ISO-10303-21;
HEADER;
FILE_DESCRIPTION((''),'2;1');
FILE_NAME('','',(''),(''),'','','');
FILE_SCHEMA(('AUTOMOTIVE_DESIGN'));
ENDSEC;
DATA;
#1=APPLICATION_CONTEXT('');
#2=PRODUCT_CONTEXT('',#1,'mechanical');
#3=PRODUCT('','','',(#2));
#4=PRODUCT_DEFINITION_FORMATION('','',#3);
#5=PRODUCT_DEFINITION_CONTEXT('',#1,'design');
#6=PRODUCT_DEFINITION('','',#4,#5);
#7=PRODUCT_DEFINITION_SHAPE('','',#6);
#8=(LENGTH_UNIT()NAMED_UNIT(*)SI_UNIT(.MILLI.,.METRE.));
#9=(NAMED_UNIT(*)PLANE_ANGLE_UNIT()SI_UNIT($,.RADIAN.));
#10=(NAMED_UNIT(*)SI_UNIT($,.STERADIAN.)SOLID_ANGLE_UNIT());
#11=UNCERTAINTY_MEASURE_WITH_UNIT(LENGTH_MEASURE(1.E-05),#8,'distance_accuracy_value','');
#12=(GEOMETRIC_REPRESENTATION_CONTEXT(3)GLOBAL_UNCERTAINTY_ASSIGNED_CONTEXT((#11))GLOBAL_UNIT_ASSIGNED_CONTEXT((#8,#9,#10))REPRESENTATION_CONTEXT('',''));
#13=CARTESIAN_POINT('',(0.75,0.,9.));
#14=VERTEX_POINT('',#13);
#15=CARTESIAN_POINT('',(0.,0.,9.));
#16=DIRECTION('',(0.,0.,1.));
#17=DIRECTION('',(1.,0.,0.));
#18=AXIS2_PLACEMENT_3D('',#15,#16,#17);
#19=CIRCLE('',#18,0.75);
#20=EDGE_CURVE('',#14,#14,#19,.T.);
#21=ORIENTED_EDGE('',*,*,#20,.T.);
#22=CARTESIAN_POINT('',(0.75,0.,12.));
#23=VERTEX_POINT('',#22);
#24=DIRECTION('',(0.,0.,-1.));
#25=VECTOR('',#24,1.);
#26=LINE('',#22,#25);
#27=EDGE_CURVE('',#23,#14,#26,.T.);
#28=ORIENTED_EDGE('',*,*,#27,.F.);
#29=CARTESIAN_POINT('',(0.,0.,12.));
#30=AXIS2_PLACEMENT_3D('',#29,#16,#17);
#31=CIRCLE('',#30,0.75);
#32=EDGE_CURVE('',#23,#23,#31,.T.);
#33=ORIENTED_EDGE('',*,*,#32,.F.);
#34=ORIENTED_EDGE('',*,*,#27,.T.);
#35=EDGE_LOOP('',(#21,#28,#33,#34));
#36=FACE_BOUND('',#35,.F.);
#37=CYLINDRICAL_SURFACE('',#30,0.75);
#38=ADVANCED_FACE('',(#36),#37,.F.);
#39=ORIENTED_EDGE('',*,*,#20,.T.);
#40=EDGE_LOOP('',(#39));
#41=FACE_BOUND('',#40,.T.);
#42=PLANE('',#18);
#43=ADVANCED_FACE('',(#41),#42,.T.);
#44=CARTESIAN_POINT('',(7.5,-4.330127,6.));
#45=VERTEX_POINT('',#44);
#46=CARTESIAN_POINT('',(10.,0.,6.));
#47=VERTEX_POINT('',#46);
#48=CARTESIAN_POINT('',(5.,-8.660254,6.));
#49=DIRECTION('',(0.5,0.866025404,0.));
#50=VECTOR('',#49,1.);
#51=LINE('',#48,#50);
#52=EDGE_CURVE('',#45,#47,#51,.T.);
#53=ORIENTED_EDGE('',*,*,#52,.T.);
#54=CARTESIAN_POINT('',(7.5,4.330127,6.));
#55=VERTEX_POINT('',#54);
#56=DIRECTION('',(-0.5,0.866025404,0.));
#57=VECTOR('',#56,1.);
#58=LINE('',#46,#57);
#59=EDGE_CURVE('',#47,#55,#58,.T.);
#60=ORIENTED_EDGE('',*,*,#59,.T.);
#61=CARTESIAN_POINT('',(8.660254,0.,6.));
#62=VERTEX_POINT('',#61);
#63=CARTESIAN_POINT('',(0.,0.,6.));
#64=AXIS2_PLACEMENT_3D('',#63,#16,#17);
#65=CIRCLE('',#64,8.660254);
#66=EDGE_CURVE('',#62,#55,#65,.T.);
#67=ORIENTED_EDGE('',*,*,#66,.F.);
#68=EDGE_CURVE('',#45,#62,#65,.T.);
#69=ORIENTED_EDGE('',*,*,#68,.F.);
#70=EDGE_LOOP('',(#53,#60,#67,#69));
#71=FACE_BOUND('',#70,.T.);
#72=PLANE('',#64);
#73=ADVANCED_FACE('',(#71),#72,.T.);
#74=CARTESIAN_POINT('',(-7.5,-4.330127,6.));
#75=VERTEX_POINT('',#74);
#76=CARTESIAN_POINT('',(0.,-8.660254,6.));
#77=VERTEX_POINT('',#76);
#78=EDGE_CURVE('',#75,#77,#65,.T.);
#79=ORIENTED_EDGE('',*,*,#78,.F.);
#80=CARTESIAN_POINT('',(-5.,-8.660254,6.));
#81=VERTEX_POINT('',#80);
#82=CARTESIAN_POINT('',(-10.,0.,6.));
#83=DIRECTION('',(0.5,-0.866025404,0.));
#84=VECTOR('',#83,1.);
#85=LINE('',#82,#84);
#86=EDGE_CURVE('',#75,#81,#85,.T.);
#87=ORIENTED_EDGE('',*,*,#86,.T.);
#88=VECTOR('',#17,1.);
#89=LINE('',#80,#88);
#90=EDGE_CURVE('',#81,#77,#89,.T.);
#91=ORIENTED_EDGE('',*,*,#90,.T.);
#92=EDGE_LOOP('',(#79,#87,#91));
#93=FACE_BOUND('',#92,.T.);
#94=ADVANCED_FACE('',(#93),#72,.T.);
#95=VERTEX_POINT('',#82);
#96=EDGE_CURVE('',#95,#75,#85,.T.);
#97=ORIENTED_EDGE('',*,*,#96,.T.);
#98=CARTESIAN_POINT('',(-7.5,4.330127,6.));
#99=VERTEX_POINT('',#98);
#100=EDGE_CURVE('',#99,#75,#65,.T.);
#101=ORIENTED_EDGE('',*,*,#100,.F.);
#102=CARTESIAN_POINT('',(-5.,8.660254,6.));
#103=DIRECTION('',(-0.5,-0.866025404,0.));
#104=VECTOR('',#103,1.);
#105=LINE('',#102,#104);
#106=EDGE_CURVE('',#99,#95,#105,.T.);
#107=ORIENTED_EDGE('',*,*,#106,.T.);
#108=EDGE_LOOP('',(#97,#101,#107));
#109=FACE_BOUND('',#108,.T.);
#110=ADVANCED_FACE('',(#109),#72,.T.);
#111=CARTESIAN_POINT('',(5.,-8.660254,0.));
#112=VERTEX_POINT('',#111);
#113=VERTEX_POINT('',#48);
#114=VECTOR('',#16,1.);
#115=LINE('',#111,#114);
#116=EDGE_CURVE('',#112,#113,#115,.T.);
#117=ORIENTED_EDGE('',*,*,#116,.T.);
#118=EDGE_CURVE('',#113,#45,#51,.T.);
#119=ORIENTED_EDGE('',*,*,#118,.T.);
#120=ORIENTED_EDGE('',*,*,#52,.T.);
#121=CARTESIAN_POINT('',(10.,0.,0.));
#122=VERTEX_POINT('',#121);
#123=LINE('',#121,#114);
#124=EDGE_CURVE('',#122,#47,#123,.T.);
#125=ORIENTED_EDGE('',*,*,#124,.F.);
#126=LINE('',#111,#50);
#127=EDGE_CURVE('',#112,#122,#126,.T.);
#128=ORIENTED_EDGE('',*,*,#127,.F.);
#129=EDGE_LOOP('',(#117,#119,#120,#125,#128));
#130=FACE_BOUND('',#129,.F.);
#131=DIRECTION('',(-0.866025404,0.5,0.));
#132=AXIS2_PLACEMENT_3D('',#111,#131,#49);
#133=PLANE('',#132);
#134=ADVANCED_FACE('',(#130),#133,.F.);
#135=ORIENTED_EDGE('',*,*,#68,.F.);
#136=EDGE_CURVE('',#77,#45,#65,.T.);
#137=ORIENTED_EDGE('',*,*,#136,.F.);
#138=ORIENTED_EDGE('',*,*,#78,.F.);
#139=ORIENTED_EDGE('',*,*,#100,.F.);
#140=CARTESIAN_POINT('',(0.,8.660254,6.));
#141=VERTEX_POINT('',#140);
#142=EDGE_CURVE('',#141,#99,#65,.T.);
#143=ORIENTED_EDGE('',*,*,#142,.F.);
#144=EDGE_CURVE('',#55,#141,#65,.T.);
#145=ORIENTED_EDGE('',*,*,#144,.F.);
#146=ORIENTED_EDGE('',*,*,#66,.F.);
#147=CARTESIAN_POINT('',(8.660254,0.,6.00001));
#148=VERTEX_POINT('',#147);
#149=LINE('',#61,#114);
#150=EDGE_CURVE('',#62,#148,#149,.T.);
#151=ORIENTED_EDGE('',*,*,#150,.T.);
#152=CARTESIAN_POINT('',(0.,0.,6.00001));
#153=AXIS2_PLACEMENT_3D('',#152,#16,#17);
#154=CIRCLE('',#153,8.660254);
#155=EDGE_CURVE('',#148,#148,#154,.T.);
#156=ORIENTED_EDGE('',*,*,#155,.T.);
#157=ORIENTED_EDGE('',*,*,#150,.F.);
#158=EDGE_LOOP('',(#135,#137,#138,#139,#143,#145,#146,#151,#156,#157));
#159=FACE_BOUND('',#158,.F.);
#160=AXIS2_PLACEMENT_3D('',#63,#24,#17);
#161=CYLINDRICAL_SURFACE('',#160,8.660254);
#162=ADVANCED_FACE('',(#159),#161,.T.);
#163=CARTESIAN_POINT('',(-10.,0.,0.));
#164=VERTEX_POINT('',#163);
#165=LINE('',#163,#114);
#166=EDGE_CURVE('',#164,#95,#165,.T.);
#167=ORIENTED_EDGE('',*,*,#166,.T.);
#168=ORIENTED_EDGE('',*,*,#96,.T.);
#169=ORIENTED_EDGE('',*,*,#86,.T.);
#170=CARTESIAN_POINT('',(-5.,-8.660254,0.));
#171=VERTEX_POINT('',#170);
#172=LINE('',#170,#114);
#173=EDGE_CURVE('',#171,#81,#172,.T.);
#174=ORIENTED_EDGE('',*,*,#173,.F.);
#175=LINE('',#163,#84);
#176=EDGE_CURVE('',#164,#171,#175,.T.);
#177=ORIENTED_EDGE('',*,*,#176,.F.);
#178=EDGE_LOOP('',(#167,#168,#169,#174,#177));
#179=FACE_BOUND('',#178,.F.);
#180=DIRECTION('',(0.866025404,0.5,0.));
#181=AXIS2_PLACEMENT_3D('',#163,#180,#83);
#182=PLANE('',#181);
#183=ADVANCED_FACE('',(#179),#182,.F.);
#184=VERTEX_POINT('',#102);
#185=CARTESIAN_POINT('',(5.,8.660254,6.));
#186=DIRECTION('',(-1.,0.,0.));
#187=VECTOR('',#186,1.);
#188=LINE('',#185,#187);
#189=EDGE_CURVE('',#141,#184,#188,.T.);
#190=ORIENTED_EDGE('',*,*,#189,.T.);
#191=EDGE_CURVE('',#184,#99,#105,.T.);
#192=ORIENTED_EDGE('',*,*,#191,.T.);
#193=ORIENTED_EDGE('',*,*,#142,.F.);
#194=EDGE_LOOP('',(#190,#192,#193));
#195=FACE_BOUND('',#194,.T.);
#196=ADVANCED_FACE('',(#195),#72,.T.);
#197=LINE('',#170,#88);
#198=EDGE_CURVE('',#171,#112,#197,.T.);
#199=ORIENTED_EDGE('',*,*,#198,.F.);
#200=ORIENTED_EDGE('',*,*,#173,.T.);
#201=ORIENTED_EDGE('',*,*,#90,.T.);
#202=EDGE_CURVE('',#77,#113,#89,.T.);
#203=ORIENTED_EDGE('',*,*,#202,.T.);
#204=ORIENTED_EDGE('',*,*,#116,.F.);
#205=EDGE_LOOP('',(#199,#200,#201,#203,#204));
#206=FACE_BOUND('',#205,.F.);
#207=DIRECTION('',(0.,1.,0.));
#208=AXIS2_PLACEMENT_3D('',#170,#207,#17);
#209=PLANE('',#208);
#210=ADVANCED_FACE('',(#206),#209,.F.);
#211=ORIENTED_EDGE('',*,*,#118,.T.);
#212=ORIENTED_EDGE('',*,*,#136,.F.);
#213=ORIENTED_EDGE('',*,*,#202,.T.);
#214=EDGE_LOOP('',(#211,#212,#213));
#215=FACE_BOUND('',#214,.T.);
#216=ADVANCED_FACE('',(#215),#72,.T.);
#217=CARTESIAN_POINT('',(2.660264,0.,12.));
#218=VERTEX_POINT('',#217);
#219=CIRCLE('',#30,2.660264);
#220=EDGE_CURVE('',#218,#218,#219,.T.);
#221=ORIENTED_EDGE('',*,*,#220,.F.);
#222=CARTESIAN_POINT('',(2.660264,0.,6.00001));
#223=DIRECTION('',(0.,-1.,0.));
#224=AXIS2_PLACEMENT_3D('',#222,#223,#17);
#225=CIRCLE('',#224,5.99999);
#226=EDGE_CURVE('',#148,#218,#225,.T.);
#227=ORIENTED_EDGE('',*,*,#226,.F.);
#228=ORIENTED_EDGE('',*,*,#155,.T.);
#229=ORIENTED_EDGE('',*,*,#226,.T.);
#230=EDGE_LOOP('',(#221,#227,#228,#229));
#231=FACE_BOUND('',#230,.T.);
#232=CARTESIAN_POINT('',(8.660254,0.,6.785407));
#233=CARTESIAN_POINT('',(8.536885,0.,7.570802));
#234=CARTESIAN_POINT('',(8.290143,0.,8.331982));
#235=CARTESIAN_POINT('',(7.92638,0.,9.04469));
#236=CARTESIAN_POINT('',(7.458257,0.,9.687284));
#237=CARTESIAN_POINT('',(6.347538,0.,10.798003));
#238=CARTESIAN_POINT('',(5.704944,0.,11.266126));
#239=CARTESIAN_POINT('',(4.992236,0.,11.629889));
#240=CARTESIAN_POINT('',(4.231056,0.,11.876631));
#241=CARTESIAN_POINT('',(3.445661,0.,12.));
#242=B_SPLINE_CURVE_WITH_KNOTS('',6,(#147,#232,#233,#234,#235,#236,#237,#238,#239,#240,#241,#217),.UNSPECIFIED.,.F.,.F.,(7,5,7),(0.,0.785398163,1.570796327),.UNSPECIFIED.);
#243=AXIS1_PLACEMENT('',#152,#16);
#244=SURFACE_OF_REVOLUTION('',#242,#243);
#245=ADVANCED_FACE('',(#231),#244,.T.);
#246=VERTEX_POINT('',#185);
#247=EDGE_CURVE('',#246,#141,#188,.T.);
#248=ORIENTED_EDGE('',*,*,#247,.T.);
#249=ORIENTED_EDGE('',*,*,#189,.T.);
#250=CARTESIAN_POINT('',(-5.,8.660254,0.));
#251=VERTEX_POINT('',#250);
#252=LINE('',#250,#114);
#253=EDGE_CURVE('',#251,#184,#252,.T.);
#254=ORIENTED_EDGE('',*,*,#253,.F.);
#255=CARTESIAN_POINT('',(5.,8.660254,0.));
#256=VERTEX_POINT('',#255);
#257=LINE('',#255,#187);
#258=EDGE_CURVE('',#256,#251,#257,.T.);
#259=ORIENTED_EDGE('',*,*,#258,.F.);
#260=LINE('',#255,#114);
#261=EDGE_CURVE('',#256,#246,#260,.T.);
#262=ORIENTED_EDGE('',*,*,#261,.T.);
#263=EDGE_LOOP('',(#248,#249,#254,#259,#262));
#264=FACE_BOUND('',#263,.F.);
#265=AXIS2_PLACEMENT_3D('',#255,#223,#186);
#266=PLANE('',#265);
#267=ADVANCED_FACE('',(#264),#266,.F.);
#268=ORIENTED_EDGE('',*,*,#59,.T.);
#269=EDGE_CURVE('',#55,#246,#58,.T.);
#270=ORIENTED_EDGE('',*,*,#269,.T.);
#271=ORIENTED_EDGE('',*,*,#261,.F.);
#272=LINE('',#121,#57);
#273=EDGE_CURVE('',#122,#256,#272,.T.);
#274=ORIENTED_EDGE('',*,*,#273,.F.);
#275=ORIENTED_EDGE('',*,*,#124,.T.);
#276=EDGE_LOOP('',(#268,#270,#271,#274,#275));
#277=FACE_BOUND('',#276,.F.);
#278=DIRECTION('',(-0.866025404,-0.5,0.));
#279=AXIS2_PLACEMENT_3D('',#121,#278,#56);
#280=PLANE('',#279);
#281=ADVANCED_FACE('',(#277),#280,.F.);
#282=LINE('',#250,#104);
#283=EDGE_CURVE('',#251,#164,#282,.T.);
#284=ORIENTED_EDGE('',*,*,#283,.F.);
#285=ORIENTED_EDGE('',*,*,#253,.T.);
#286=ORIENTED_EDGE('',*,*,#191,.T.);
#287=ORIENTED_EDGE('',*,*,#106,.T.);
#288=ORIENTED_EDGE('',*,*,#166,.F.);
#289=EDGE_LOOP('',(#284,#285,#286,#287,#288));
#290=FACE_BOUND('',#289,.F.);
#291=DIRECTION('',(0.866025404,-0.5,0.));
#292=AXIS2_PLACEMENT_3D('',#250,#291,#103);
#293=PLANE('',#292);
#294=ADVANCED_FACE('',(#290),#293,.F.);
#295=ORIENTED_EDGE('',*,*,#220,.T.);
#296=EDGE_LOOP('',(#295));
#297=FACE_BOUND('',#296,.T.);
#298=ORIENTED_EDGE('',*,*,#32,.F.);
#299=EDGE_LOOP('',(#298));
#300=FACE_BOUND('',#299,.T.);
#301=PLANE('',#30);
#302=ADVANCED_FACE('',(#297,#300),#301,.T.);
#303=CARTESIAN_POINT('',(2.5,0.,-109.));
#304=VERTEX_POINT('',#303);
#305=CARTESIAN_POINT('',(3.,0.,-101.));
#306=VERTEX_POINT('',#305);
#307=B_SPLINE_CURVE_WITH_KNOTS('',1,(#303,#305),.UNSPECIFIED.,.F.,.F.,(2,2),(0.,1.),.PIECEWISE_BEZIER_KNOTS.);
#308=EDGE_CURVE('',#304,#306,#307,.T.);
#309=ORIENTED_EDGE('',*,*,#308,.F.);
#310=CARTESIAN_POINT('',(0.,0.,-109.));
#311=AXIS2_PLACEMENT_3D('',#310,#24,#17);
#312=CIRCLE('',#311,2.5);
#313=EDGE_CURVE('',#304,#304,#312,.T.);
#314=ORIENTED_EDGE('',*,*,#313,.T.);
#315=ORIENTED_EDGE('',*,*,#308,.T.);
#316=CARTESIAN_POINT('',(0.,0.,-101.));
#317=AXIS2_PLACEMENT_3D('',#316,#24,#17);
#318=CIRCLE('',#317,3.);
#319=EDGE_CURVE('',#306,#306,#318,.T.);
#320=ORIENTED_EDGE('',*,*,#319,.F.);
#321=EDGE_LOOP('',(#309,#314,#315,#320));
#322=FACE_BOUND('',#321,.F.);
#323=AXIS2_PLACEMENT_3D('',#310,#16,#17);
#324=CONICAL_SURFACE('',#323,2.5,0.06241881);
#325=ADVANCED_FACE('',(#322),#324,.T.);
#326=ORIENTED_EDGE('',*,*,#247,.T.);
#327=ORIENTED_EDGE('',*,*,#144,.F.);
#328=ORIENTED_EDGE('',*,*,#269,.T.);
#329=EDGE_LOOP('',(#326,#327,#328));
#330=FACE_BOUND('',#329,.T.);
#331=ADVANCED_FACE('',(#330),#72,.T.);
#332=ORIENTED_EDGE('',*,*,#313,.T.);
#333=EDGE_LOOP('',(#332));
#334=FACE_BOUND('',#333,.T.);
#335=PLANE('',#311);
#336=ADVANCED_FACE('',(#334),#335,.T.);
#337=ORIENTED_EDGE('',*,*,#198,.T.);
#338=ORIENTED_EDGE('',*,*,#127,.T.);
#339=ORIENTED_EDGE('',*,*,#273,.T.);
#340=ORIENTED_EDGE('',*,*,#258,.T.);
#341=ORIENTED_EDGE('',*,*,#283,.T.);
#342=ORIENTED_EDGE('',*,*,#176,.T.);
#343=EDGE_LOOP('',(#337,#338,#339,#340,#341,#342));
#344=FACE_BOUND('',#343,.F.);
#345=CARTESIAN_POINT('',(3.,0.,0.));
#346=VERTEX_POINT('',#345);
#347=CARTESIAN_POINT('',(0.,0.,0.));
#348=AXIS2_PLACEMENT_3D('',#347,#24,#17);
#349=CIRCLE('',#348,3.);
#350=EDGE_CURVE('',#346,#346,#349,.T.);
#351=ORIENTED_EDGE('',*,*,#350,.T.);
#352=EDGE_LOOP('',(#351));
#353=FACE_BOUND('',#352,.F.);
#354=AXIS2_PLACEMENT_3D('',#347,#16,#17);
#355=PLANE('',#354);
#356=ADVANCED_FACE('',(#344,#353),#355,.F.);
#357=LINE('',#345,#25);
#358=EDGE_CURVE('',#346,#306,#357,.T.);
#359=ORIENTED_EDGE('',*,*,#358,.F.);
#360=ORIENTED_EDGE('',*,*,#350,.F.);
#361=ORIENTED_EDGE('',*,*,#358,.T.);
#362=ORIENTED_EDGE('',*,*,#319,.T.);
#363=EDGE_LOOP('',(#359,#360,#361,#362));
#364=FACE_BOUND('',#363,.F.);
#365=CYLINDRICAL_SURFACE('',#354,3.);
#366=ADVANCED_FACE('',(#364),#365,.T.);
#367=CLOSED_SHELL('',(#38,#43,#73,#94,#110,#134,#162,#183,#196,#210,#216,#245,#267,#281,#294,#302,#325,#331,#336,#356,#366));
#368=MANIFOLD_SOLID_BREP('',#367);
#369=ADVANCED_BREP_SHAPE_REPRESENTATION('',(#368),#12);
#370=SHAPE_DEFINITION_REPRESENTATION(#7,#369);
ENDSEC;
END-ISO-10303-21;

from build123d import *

# Parameters (mm, degrees)
F0_R     = 3
F1_DEPTH = 6
F2_R     = 8.6602540378
F3_DEPTH = 6
F4_R     = 5.99999
F5_R     = 0.75
F6_DEPTH = 3
F7_R     = 3
F8_DEPTH = 101
F10_R    = 2.5
F11_R    = 3


# Not quite as in the source:
# - a fillet or chamfer is up to 0.001 mm smaller than in the source, because OpenCascade refuses the exact size


with BuildPart() as f1:
    # F0 (on Top) → F1 (new body)
    with BuildSketch(Plane.XY):
        Polygon((5, 8.6602540378), (-5, 8.6602540378), (-10, 0), (-5, -8.6602540378), (5, -8.6602540378), (10, 0), align=None)
        Circle(F0_R, mode=Mode.SUBTRACT)
        Circle(F0_R)
    extrude(amount=F1_DEPTH)

    # F2 (on face) → F3 (join)
    with BuildSketch(Plane.XY.offset(6)):
        Circle(F2_R)
    extrude(amount=F3_DEPTH)

    # F4 (radius 6 in the source; OpenCascade refuses exactly that, so slightly less here)
    f4_edges = [f1.edges().sort_by_distance(p)[0] for p in [
        (-8.660254, 0, 12),
    ]]
    fillet(f4_edges, radius=F4_R)

    # F5 (on face) → F6 (cut)
    with BuildSketch(Plane.XY.offset(12)):
        Circle(F5_R)
    extrude(amount=-F6_DEPTH, mode=Mode.SUBTRACT)

    # F7 (on face) → F8 (join)
    with BuildSketch(Plane(origin=(0, 0, 0), x_dir=(1, 0, 0), z_dir=(0, 0, -1))):
        Circle(F7_R)
    extrude(amount=F8_DEPTH)

    # F10 (on offset) → F12 section 0
    with BuildSketch(Plane(origin=(0, 0, -109), x_dir=(1, 0, 0), z_dir=(0, 0, -1))):
        Circle(F10_R)
    # F11 (on face) → F12 section 1
    with BuildSketch(Plane(origin=(0, 0, -101), x_dir=(1, 0, 0), z_dir=(0, 0, -1))):
        Circle(F11_R)
    loft()


solid = f1.part
